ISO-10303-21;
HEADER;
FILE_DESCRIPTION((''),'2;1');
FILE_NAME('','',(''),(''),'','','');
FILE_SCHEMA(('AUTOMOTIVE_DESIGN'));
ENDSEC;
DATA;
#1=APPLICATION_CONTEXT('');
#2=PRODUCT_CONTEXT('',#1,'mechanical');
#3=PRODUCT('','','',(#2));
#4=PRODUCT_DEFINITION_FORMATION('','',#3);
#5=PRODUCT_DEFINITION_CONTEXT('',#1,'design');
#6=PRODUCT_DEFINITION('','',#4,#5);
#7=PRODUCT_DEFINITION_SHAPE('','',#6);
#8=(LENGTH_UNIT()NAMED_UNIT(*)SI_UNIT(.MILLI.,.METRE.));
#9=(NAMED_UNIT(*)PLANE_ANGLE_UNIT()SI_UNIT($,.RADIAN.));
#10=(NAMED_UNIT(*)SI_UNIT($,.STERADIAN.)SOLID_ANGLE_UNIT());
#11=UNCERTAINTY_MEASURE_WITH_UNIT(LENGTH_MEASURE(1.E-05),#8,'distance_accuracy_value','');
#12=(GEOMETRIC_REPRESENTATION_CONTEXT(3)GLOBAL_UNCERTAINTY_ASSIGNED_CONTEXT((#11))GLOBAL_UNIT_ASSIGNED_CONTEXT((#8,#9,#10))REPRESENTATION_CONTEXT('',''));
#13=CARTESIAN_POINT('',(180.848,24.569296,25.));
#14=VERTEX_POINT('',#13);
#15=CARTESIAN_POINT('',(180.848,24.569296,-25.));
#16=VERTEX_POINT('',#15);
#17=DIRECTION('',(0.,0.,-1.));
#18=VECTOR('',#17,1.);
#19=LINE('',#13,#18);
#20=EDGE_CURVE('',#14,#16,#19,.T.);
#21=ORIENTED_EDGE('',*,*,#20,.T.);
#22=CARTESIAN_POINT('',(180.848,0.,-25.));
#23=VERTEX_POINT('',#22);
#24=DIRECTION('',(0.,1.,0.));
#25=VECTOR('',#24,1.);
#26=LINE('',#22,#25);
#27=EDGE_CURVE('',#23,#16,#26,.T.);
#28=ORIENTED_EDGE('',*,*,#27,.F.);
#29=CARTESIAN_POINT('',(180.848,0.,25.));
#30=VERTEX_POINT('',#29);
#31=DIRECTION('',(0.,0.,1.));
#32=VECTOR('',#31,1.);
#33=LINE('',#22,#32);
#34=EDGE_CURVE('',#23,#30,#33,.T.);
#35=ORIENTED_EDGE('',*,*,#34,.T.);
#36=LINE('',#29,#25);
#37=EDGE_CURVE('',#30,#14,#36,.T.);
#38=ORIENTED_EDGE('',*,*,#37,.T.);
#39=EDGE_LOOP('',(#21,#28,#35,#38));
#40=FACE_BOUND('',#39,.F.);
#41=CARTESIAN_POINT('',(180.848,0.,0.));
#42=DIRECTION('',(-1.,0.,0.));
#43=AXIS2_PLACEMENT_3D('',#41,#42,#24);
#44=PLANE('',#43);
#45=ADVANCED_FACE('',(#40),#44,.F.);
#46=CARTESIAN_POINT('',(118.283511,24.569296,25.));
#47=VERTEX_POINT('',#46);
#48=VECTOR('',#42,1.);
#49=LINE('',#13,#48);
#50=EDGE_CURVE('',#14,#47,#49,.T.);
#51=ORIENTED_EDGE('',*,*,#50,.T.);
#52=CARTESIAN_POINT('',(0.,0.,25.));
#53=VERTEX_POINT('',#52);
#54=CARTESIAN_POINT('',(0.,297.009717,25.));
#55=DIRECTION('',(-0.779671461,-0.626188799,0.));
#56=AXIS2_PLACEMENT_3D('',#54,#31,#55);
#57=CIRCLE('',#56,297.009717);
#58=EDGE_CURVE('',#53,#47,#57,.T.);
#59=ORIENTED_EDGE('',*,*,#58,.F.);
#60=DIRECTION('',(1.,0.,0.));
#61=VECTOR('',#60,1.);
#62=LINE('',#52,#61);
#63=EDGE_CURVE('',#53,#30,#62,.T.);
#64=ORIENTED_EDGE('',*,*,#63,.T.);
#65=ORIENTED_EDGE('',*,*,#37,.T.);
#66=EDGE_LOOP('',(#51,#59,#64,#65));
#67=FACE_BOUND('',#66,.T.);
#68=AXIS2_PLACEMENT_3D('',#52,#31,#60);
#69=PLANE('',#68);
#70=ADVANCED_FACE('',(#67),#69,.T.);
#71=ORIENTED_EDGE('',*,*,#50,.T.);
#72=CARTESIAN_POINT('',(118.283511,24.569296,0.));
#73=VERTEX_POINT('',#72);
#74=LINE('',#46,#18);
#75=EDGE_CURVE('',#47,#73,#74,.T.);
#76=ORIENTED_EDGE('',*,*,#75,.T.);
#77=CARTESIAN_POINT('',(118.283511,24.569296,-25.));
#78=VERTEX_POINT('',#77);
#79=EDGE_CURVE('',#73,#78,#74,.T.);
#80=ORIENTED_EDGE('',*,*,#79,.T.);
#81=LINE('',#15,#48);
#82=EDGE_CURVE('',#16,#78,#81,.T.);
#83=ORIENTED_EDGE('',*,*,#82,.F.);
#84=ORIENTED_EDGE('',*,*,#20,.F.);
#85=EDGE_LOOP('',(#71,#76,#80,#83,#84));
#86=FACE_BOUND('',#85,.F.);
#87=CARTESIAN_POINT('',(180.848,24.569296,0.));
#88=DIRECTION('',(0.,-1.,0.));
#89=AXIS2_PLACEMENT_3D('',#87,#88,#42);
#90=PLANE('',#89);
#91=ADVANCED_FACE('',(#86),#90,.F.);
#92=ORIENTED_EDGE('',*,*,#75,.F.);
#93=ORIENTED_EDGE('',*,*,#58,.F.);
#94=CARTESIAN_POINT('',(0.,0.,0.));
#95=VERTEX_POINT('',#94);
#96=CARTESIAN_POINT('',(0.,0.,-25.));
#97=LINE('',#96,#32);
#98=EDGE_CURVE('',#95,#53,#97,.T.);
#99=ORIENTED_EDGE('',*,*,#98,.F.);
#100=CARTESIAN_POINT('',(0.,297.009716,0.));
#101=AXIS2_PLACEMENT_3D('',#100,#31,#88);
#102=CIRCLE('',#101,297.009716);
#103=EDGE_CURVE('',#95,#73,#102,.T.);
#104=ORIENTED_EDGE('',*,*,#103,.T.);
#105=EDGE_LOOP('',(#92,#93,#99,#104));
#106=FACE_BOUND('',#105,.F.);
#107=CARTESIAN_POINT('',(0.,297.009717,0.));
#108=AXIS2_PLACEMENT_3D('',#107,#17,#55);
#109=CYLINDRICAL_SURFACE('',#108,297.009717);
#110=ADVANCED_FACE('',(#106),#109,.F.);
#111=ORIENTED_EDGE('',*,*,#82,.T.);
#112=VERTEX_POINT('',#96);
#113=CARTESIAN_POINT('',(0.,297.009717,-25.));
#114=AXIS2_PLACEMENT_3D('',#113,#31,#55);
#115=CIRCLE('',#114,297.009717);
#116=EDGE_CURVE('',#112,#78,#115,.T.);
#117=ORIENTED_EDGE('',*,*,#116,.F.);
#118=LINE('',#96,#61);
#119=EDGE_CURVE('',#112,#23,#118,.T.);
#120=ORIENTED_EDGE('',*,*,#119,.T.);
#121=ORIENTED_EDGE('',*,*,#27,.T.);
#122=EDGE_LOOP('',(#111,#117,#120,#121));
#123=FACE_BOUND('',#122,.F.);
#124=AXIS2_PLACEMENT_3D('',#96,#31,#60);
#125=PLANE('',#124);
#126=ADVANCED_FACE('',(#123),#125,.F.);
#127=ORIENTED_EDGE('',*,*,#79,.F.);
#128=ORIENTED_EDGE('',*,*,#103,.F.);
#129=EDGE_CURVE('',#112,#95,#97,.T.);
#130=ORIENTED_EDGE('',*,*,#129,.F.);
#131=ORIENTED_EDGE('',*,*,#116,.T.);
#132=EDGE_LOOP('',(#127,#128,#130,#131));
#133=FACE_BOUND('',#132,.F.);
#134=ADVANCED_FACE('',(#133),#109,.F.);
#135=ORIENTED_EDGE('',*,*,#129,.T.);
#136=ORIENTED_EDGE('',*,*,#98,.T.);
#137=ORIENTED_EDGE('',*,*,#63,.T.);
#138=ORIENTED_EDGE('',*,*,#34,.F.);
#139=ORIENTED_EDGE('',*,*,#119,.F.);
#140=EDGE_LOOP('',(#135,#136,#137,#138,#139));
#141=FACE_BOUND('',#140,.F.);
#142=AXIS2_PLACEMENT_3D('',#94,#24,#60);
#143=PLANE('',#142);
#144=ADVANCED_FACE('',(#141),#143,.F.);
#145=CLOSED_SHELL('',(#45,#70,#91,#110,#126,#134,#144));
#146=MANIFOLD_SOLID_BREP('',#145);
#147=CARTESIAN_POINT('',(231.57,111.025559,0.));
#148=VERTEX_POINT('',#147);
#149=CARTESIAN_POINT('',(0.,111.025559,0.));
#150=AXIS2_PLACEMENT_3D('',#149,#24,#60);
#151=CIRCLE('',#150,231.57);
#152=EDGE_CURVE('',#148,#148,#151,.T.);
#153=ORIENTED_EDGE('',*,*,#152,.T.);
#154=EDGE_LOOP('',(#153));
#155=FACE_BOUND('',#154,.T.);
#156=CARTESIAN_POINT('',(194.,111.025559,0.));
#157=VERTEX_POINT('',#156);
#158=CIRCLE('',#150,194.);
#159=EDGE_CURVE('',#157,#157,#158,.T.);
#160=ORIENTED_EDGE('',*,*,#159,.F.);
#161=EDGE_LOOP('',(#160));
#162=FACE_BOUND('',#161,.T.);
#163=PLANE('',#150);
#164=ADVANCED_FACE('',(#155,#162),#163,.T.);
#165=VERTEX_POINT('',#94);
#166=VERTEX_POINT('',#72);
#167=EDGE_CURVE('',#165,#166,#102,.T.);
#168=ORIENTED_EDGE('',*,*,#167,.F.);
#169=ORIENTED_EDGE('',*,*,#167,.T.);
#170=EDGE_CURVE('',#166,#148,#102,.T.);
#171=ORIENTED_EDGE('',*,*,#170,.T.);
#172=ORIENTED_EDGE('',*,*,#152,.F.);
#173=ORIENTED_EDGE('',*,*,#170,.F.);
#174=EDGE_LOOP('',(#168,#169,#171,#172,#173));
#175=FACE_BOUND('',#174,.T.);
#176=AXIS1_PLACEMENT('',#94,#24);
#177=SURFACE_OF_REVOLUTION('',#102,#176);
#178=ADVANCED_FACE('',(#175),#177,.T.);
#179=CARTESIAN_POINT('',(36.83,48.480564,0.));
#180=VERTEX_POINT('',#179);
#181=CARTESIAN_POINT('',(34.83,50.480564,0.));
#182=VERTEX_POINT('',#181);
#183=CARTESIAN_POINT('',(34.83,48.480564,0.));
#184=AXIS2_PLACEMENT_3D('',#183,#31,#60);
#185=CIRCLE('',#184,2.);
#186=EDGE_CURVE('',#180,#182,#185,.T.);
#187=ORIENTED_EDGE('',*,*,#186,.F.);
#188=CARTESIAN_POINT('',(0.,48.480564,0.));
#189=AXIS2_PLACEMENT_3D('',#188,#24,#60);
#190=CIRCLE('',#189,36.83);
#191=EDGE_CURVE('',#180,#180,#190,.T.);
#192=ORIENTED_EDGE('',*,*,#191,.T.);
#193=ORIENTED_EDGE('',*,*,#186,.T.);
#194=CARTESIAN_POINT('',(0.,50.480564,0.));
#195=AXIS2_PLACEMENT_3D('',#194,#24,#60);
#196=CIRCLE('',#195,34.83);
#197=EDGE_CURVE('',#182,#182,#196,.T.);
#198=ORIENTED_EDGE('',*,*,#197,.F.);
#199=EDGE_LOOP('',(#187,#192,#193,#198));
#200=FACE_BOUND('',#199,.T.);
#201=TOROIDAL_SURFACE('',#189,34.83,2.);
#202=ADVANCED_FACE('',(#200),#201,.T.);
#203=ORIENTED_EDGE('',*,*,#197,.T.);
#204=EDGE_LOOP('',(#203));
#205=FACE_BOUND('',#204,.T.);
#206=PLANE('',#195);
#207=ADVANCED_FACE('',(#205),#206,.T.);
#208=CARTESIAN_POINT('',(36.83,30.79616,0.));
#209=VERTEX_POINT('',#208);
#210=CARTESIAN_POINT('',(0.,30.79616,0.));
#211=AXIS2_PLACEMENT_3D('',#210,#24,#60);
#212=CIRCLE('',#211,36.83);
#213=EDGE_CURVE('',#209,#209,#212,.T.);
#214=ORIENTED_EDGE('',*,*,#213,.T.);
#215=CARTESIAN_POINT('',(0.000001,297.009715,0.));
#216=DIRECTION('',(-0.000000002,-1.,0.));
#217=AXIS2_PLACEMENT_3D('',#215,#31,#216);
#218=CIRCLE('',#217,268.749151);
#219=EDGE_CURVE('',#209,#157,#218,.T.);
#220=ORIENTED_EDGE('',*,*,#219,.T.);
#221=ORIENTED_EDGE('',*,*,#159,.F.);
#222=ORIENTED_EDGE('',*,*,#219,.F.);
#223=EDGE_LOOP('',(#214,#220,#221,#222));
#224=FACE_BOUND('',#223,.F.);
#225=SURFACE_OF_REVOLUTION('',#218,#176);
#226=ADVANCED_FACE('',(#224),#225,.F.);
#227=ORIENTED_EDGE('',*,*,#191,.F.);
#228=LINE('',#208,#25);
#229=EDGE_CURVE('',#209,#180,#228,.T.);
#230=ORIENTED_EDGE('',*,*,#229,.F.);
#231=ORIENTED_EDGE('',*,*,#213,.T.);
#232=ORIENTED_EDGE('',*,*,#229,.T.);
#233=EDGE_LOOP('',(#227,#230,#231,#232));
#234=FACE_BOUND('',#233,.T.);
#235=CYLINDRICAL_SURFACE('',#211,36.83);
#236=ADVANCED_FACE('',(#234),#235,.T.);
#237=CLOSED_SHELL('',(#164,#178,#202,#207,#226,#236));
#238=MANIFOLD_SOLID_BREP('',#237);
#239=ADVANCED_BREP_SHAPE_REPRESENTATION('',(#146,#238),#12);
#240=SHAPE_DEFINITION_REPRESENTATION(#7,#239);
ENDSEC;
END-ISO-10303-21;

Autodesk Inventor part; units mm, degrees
ref_plane "YZ Plane" through (0, 0, 0) normal (1, 0, 0) x (0, 1, 0)
ref_plane "XZ Plane" through (0, 0, 0) normal (0, 1, 0) x (-1, 0, 0)
ref_plane "XY Plane" through (0, 0, 0) normal (0, 0, 1) x (1, 0, 0)
sketch "Sketch1" plane through (0, 0, 0) normal (0, 0, 1) x (1, 0, 0)
  arc A0 (0, 0) -> (231.57, 111.025559) centre (0, 297.009717) ccw
  line L0 (0, 0) -> (0, 48.480564)
  arc A1 (0, 28.260564) -> (194, 111.025559) centre (0, 297.009717) ccw
  line L1 (231.57, 111.025559) -> (194, 111.025559)
  line L2 (36.83, 30.79616) -> (36.83, 48.480564)
  line L3 (36.83, 48.480564) -> (0, 48.480564)
  line L4 (36.83, 48.480564) -> (36.83, 48.480564)
  line L5 (34.83, 50.480564) -> (2, 50.480564)
  arc A2 (36.83, 48.480564) -> (34.83, 50.480564) centre (34.83, 48.480564) ccw
  line L6 (2, 50.480564) -> (0, 50.480564)
  line L7 (0, 50.480564) -> (0, 48.480564)
  point P0 (71.397957, -25.026885)
  point P1 (-122.602043, -107.79188)
revolve "Revolution1" add sketch "Sketch1" angle 360 about axis through (0, 0, 0) along (0, 1, 0)
sketch "Sketch2" plane through (0, 0, 0) normal (0, 0, 1) x (1, 0, 0)
  arc A0 (-231.57, 111.025559) -> (231.57, 111.025559) centre (0, 297.009717) ccw
  line L0 (0, 0) -> (180.848, 0)
  line L1 (180.848, 0) -> (180.848, 18.419799)
  line L2 (180.848, 18.419799) -> (180.848, 24.569296)
  line L3 (180.848, 24.569296) -> (118.283511, 24.569296)
extrude "Extrusion1" add sketch "Sketch2" along normal mid plane 50
sketch "Sketch3" plane through (0, 0, 25) normal (0, 0, 1) x (1, 0, 0)
  line L0 (180.848, 24.569296) -> (118.283511, 24.569296)
  line L1 (0, 0) -> (180.848, 0)
  arc A0 (180.848, 24.569296) -> (180.848, 0) centre (275.302486, 12.284648) ccw
  dimension "d8" = 95.25
sketch "Sketch4" plane through (0, 0, 25) normal (0, 0, 1) x (1, 0, 0)
  line L0 (180.848, 24.569296) -> (180.848, 0) construction
  line L1 (180.848, 12.284648) -> (232.300575, 12.284648) construction
  point P0 (0, 0)
properties part number "Dish final"
